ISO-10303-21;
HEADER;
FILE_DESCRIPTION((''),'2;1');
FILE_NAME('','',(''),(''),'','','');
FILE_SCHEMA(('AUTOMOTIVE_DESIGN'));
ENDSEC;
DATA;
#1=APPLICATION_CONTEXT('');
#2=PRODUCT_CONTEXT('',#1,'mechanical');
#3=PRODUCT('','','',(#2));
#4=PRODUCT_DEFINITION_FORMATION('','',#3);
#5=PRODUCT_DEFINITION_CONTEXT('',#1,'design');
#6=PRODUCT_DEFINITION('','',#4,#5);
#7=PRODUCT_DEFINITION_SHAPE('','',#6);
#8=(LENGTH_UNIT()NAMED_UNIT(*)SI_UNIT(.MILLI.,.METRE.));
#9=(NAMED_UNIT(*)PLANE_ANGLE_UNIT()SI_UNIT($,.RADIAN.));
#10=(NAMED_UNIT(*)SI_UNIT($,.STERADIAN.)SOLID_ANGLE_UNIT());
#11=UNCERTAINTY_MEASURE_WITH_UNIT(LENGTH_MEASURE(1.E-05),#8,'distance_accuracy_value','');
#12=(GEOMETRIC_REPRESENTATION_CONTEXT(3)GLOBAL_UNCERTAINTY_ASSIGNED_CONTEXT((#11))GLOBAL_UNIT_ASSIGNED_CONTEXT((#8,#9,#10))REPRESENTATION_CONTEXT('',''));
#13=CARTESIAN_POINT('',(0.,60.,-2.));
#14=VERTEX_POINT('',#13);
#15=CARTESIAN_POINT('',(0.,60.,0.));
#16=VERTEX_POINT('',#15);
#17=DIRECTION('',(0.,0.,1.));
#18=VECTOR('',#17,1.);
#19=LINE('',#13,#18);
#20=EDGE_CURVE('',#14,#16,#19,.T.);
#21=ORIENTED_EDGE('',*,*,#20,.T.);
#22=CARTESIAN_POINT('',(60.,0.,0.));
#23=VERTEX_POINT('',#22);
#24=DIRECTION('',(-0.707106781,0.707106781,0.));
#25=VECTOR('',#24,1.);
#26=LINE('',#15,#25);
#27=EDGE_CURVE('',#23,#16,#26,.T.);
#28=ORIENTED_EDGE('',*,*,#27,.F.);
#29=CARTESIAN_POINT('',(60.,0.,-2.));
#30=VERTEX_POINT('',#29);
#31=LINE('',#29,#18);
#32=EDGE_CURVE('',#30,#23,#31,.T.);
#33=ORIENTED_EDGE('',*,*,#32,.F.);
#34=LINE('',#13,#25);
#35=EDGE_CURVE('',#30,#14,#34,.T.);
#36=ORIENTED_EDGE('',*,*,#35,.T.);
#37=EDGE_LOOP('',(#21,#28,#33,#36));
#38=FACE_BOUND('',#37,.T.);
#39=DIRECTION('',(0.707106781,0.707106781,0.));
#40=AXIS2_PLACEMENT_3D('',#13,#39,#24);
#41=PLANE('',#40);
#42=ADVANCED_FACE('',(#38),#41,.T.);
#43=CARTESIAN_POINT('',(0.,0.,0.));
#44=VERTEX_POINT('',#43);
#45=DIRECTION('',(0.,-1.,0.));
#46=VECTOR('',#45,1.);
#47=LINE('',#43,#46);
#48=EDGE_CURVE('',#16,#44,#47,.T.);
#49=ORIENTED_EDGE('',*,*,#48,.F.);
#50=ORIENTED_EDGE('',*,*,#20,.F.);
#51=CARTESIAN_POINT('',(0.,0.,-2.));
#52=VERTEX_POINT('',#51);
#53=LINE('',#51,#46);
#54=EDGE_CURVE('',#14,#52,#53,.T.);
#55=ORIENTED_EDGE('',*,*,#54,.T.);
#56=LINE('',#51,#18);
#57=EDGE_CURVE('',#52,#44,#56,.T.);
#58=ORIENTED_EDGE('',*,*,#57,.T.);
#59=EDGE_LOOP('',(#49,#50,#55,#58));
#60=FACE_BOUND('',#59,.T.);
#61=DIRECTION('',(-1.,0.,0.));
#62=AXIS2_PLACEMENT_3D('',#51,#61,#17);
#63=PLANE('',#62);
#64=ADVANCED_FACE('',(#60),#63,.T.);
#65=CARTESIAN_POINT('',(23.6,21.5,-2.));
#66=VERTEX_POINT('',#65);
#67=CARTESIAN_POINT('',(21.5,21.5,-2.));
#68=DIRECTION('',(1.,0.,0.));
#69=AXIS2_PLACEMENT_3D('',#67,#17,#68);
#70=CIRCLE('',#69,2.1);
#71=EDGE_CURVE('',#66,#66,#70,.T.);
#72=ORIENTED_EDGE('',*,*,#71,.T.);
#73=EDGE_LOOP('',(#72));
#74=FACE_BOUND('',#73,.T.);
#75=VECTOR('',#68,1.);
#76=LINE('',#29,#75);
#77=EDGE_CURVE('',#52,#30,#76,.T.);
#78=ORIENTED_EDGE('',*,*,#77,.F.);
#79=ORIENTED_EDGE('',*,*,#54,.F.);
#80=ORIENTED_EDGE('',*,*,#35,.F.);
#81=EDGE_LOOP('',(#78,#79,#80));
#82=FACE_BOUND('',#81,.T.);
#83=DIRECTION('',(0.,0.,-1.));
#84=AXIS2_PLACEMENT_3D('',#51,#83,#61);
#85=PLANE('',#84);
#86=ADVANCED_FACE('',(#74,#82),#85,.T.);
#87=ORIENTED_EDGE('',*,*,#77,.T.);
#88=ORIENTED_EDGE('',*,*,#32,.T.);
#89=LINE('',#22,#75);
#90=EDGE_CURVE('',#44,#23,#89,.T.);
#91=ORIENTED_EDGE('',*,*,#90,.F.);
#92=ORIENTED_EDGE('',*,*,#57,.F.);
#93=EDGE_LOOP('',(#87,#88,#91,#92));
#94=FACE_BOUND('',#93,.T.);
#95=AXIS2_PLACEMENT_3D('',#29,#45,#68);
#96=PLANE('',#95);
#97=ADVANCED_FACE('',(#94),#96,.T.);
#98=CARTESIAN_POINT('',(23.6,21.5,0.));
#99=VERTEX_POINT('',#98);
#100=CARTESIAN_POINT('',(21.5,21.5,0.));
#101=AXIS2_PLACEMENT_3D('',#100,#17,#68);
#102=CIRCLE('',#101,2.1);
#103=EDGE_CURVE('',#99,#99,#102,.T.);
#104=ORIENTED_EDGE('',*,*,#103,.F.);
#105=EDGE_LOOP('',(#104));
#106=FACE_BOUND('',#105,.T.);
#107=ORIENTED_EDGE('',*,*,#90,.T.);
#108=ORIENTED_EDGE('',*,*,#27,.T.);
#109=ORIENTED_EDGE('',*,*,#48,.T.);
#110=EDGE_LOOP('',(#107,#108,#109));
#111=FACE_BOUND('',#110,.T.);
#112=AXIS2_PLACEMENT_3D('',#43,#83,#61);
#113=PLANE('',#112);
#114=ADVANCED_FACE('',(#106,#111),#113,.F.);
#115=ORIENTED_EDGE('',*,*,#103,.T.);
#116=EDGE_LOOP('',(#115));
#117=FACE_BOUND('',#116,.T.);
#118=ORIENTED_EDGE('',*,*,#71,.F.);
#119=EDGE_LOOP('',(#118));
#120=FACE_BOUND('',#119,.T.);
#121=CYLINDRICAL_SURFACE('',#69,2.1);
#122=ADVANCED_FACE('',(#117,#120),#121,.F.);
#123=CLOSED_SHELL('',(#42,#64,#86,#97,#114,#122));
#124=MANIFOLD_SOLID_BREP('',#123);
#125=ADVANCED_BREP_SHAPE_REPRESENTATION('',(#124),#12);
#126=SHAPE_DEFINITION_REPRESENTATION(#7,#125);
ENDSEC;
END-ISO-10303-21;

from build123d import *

# Parameters (mm, degrees)
SKETCH_1_R             = 2.1
SM_BASE_FLANGE_1_DEPTH = 2


# Sheet-metal steps are written as plain solids
with BuildPart() as part:
    # Sketch 1 → 基体-法兰1 (new body)
    with BuildSketch(Plane.XY):
        Polygon((0, 0), (0, 60), (60, 0), align=None)
        with Locations((21.5, 21.5)):
            Circle(SKETCH_1_R, mode=Mode.SUBTRACT)
    extrude(amount=-SM_BASE_FLANGE_1_DEPTH)


solid = part.part
